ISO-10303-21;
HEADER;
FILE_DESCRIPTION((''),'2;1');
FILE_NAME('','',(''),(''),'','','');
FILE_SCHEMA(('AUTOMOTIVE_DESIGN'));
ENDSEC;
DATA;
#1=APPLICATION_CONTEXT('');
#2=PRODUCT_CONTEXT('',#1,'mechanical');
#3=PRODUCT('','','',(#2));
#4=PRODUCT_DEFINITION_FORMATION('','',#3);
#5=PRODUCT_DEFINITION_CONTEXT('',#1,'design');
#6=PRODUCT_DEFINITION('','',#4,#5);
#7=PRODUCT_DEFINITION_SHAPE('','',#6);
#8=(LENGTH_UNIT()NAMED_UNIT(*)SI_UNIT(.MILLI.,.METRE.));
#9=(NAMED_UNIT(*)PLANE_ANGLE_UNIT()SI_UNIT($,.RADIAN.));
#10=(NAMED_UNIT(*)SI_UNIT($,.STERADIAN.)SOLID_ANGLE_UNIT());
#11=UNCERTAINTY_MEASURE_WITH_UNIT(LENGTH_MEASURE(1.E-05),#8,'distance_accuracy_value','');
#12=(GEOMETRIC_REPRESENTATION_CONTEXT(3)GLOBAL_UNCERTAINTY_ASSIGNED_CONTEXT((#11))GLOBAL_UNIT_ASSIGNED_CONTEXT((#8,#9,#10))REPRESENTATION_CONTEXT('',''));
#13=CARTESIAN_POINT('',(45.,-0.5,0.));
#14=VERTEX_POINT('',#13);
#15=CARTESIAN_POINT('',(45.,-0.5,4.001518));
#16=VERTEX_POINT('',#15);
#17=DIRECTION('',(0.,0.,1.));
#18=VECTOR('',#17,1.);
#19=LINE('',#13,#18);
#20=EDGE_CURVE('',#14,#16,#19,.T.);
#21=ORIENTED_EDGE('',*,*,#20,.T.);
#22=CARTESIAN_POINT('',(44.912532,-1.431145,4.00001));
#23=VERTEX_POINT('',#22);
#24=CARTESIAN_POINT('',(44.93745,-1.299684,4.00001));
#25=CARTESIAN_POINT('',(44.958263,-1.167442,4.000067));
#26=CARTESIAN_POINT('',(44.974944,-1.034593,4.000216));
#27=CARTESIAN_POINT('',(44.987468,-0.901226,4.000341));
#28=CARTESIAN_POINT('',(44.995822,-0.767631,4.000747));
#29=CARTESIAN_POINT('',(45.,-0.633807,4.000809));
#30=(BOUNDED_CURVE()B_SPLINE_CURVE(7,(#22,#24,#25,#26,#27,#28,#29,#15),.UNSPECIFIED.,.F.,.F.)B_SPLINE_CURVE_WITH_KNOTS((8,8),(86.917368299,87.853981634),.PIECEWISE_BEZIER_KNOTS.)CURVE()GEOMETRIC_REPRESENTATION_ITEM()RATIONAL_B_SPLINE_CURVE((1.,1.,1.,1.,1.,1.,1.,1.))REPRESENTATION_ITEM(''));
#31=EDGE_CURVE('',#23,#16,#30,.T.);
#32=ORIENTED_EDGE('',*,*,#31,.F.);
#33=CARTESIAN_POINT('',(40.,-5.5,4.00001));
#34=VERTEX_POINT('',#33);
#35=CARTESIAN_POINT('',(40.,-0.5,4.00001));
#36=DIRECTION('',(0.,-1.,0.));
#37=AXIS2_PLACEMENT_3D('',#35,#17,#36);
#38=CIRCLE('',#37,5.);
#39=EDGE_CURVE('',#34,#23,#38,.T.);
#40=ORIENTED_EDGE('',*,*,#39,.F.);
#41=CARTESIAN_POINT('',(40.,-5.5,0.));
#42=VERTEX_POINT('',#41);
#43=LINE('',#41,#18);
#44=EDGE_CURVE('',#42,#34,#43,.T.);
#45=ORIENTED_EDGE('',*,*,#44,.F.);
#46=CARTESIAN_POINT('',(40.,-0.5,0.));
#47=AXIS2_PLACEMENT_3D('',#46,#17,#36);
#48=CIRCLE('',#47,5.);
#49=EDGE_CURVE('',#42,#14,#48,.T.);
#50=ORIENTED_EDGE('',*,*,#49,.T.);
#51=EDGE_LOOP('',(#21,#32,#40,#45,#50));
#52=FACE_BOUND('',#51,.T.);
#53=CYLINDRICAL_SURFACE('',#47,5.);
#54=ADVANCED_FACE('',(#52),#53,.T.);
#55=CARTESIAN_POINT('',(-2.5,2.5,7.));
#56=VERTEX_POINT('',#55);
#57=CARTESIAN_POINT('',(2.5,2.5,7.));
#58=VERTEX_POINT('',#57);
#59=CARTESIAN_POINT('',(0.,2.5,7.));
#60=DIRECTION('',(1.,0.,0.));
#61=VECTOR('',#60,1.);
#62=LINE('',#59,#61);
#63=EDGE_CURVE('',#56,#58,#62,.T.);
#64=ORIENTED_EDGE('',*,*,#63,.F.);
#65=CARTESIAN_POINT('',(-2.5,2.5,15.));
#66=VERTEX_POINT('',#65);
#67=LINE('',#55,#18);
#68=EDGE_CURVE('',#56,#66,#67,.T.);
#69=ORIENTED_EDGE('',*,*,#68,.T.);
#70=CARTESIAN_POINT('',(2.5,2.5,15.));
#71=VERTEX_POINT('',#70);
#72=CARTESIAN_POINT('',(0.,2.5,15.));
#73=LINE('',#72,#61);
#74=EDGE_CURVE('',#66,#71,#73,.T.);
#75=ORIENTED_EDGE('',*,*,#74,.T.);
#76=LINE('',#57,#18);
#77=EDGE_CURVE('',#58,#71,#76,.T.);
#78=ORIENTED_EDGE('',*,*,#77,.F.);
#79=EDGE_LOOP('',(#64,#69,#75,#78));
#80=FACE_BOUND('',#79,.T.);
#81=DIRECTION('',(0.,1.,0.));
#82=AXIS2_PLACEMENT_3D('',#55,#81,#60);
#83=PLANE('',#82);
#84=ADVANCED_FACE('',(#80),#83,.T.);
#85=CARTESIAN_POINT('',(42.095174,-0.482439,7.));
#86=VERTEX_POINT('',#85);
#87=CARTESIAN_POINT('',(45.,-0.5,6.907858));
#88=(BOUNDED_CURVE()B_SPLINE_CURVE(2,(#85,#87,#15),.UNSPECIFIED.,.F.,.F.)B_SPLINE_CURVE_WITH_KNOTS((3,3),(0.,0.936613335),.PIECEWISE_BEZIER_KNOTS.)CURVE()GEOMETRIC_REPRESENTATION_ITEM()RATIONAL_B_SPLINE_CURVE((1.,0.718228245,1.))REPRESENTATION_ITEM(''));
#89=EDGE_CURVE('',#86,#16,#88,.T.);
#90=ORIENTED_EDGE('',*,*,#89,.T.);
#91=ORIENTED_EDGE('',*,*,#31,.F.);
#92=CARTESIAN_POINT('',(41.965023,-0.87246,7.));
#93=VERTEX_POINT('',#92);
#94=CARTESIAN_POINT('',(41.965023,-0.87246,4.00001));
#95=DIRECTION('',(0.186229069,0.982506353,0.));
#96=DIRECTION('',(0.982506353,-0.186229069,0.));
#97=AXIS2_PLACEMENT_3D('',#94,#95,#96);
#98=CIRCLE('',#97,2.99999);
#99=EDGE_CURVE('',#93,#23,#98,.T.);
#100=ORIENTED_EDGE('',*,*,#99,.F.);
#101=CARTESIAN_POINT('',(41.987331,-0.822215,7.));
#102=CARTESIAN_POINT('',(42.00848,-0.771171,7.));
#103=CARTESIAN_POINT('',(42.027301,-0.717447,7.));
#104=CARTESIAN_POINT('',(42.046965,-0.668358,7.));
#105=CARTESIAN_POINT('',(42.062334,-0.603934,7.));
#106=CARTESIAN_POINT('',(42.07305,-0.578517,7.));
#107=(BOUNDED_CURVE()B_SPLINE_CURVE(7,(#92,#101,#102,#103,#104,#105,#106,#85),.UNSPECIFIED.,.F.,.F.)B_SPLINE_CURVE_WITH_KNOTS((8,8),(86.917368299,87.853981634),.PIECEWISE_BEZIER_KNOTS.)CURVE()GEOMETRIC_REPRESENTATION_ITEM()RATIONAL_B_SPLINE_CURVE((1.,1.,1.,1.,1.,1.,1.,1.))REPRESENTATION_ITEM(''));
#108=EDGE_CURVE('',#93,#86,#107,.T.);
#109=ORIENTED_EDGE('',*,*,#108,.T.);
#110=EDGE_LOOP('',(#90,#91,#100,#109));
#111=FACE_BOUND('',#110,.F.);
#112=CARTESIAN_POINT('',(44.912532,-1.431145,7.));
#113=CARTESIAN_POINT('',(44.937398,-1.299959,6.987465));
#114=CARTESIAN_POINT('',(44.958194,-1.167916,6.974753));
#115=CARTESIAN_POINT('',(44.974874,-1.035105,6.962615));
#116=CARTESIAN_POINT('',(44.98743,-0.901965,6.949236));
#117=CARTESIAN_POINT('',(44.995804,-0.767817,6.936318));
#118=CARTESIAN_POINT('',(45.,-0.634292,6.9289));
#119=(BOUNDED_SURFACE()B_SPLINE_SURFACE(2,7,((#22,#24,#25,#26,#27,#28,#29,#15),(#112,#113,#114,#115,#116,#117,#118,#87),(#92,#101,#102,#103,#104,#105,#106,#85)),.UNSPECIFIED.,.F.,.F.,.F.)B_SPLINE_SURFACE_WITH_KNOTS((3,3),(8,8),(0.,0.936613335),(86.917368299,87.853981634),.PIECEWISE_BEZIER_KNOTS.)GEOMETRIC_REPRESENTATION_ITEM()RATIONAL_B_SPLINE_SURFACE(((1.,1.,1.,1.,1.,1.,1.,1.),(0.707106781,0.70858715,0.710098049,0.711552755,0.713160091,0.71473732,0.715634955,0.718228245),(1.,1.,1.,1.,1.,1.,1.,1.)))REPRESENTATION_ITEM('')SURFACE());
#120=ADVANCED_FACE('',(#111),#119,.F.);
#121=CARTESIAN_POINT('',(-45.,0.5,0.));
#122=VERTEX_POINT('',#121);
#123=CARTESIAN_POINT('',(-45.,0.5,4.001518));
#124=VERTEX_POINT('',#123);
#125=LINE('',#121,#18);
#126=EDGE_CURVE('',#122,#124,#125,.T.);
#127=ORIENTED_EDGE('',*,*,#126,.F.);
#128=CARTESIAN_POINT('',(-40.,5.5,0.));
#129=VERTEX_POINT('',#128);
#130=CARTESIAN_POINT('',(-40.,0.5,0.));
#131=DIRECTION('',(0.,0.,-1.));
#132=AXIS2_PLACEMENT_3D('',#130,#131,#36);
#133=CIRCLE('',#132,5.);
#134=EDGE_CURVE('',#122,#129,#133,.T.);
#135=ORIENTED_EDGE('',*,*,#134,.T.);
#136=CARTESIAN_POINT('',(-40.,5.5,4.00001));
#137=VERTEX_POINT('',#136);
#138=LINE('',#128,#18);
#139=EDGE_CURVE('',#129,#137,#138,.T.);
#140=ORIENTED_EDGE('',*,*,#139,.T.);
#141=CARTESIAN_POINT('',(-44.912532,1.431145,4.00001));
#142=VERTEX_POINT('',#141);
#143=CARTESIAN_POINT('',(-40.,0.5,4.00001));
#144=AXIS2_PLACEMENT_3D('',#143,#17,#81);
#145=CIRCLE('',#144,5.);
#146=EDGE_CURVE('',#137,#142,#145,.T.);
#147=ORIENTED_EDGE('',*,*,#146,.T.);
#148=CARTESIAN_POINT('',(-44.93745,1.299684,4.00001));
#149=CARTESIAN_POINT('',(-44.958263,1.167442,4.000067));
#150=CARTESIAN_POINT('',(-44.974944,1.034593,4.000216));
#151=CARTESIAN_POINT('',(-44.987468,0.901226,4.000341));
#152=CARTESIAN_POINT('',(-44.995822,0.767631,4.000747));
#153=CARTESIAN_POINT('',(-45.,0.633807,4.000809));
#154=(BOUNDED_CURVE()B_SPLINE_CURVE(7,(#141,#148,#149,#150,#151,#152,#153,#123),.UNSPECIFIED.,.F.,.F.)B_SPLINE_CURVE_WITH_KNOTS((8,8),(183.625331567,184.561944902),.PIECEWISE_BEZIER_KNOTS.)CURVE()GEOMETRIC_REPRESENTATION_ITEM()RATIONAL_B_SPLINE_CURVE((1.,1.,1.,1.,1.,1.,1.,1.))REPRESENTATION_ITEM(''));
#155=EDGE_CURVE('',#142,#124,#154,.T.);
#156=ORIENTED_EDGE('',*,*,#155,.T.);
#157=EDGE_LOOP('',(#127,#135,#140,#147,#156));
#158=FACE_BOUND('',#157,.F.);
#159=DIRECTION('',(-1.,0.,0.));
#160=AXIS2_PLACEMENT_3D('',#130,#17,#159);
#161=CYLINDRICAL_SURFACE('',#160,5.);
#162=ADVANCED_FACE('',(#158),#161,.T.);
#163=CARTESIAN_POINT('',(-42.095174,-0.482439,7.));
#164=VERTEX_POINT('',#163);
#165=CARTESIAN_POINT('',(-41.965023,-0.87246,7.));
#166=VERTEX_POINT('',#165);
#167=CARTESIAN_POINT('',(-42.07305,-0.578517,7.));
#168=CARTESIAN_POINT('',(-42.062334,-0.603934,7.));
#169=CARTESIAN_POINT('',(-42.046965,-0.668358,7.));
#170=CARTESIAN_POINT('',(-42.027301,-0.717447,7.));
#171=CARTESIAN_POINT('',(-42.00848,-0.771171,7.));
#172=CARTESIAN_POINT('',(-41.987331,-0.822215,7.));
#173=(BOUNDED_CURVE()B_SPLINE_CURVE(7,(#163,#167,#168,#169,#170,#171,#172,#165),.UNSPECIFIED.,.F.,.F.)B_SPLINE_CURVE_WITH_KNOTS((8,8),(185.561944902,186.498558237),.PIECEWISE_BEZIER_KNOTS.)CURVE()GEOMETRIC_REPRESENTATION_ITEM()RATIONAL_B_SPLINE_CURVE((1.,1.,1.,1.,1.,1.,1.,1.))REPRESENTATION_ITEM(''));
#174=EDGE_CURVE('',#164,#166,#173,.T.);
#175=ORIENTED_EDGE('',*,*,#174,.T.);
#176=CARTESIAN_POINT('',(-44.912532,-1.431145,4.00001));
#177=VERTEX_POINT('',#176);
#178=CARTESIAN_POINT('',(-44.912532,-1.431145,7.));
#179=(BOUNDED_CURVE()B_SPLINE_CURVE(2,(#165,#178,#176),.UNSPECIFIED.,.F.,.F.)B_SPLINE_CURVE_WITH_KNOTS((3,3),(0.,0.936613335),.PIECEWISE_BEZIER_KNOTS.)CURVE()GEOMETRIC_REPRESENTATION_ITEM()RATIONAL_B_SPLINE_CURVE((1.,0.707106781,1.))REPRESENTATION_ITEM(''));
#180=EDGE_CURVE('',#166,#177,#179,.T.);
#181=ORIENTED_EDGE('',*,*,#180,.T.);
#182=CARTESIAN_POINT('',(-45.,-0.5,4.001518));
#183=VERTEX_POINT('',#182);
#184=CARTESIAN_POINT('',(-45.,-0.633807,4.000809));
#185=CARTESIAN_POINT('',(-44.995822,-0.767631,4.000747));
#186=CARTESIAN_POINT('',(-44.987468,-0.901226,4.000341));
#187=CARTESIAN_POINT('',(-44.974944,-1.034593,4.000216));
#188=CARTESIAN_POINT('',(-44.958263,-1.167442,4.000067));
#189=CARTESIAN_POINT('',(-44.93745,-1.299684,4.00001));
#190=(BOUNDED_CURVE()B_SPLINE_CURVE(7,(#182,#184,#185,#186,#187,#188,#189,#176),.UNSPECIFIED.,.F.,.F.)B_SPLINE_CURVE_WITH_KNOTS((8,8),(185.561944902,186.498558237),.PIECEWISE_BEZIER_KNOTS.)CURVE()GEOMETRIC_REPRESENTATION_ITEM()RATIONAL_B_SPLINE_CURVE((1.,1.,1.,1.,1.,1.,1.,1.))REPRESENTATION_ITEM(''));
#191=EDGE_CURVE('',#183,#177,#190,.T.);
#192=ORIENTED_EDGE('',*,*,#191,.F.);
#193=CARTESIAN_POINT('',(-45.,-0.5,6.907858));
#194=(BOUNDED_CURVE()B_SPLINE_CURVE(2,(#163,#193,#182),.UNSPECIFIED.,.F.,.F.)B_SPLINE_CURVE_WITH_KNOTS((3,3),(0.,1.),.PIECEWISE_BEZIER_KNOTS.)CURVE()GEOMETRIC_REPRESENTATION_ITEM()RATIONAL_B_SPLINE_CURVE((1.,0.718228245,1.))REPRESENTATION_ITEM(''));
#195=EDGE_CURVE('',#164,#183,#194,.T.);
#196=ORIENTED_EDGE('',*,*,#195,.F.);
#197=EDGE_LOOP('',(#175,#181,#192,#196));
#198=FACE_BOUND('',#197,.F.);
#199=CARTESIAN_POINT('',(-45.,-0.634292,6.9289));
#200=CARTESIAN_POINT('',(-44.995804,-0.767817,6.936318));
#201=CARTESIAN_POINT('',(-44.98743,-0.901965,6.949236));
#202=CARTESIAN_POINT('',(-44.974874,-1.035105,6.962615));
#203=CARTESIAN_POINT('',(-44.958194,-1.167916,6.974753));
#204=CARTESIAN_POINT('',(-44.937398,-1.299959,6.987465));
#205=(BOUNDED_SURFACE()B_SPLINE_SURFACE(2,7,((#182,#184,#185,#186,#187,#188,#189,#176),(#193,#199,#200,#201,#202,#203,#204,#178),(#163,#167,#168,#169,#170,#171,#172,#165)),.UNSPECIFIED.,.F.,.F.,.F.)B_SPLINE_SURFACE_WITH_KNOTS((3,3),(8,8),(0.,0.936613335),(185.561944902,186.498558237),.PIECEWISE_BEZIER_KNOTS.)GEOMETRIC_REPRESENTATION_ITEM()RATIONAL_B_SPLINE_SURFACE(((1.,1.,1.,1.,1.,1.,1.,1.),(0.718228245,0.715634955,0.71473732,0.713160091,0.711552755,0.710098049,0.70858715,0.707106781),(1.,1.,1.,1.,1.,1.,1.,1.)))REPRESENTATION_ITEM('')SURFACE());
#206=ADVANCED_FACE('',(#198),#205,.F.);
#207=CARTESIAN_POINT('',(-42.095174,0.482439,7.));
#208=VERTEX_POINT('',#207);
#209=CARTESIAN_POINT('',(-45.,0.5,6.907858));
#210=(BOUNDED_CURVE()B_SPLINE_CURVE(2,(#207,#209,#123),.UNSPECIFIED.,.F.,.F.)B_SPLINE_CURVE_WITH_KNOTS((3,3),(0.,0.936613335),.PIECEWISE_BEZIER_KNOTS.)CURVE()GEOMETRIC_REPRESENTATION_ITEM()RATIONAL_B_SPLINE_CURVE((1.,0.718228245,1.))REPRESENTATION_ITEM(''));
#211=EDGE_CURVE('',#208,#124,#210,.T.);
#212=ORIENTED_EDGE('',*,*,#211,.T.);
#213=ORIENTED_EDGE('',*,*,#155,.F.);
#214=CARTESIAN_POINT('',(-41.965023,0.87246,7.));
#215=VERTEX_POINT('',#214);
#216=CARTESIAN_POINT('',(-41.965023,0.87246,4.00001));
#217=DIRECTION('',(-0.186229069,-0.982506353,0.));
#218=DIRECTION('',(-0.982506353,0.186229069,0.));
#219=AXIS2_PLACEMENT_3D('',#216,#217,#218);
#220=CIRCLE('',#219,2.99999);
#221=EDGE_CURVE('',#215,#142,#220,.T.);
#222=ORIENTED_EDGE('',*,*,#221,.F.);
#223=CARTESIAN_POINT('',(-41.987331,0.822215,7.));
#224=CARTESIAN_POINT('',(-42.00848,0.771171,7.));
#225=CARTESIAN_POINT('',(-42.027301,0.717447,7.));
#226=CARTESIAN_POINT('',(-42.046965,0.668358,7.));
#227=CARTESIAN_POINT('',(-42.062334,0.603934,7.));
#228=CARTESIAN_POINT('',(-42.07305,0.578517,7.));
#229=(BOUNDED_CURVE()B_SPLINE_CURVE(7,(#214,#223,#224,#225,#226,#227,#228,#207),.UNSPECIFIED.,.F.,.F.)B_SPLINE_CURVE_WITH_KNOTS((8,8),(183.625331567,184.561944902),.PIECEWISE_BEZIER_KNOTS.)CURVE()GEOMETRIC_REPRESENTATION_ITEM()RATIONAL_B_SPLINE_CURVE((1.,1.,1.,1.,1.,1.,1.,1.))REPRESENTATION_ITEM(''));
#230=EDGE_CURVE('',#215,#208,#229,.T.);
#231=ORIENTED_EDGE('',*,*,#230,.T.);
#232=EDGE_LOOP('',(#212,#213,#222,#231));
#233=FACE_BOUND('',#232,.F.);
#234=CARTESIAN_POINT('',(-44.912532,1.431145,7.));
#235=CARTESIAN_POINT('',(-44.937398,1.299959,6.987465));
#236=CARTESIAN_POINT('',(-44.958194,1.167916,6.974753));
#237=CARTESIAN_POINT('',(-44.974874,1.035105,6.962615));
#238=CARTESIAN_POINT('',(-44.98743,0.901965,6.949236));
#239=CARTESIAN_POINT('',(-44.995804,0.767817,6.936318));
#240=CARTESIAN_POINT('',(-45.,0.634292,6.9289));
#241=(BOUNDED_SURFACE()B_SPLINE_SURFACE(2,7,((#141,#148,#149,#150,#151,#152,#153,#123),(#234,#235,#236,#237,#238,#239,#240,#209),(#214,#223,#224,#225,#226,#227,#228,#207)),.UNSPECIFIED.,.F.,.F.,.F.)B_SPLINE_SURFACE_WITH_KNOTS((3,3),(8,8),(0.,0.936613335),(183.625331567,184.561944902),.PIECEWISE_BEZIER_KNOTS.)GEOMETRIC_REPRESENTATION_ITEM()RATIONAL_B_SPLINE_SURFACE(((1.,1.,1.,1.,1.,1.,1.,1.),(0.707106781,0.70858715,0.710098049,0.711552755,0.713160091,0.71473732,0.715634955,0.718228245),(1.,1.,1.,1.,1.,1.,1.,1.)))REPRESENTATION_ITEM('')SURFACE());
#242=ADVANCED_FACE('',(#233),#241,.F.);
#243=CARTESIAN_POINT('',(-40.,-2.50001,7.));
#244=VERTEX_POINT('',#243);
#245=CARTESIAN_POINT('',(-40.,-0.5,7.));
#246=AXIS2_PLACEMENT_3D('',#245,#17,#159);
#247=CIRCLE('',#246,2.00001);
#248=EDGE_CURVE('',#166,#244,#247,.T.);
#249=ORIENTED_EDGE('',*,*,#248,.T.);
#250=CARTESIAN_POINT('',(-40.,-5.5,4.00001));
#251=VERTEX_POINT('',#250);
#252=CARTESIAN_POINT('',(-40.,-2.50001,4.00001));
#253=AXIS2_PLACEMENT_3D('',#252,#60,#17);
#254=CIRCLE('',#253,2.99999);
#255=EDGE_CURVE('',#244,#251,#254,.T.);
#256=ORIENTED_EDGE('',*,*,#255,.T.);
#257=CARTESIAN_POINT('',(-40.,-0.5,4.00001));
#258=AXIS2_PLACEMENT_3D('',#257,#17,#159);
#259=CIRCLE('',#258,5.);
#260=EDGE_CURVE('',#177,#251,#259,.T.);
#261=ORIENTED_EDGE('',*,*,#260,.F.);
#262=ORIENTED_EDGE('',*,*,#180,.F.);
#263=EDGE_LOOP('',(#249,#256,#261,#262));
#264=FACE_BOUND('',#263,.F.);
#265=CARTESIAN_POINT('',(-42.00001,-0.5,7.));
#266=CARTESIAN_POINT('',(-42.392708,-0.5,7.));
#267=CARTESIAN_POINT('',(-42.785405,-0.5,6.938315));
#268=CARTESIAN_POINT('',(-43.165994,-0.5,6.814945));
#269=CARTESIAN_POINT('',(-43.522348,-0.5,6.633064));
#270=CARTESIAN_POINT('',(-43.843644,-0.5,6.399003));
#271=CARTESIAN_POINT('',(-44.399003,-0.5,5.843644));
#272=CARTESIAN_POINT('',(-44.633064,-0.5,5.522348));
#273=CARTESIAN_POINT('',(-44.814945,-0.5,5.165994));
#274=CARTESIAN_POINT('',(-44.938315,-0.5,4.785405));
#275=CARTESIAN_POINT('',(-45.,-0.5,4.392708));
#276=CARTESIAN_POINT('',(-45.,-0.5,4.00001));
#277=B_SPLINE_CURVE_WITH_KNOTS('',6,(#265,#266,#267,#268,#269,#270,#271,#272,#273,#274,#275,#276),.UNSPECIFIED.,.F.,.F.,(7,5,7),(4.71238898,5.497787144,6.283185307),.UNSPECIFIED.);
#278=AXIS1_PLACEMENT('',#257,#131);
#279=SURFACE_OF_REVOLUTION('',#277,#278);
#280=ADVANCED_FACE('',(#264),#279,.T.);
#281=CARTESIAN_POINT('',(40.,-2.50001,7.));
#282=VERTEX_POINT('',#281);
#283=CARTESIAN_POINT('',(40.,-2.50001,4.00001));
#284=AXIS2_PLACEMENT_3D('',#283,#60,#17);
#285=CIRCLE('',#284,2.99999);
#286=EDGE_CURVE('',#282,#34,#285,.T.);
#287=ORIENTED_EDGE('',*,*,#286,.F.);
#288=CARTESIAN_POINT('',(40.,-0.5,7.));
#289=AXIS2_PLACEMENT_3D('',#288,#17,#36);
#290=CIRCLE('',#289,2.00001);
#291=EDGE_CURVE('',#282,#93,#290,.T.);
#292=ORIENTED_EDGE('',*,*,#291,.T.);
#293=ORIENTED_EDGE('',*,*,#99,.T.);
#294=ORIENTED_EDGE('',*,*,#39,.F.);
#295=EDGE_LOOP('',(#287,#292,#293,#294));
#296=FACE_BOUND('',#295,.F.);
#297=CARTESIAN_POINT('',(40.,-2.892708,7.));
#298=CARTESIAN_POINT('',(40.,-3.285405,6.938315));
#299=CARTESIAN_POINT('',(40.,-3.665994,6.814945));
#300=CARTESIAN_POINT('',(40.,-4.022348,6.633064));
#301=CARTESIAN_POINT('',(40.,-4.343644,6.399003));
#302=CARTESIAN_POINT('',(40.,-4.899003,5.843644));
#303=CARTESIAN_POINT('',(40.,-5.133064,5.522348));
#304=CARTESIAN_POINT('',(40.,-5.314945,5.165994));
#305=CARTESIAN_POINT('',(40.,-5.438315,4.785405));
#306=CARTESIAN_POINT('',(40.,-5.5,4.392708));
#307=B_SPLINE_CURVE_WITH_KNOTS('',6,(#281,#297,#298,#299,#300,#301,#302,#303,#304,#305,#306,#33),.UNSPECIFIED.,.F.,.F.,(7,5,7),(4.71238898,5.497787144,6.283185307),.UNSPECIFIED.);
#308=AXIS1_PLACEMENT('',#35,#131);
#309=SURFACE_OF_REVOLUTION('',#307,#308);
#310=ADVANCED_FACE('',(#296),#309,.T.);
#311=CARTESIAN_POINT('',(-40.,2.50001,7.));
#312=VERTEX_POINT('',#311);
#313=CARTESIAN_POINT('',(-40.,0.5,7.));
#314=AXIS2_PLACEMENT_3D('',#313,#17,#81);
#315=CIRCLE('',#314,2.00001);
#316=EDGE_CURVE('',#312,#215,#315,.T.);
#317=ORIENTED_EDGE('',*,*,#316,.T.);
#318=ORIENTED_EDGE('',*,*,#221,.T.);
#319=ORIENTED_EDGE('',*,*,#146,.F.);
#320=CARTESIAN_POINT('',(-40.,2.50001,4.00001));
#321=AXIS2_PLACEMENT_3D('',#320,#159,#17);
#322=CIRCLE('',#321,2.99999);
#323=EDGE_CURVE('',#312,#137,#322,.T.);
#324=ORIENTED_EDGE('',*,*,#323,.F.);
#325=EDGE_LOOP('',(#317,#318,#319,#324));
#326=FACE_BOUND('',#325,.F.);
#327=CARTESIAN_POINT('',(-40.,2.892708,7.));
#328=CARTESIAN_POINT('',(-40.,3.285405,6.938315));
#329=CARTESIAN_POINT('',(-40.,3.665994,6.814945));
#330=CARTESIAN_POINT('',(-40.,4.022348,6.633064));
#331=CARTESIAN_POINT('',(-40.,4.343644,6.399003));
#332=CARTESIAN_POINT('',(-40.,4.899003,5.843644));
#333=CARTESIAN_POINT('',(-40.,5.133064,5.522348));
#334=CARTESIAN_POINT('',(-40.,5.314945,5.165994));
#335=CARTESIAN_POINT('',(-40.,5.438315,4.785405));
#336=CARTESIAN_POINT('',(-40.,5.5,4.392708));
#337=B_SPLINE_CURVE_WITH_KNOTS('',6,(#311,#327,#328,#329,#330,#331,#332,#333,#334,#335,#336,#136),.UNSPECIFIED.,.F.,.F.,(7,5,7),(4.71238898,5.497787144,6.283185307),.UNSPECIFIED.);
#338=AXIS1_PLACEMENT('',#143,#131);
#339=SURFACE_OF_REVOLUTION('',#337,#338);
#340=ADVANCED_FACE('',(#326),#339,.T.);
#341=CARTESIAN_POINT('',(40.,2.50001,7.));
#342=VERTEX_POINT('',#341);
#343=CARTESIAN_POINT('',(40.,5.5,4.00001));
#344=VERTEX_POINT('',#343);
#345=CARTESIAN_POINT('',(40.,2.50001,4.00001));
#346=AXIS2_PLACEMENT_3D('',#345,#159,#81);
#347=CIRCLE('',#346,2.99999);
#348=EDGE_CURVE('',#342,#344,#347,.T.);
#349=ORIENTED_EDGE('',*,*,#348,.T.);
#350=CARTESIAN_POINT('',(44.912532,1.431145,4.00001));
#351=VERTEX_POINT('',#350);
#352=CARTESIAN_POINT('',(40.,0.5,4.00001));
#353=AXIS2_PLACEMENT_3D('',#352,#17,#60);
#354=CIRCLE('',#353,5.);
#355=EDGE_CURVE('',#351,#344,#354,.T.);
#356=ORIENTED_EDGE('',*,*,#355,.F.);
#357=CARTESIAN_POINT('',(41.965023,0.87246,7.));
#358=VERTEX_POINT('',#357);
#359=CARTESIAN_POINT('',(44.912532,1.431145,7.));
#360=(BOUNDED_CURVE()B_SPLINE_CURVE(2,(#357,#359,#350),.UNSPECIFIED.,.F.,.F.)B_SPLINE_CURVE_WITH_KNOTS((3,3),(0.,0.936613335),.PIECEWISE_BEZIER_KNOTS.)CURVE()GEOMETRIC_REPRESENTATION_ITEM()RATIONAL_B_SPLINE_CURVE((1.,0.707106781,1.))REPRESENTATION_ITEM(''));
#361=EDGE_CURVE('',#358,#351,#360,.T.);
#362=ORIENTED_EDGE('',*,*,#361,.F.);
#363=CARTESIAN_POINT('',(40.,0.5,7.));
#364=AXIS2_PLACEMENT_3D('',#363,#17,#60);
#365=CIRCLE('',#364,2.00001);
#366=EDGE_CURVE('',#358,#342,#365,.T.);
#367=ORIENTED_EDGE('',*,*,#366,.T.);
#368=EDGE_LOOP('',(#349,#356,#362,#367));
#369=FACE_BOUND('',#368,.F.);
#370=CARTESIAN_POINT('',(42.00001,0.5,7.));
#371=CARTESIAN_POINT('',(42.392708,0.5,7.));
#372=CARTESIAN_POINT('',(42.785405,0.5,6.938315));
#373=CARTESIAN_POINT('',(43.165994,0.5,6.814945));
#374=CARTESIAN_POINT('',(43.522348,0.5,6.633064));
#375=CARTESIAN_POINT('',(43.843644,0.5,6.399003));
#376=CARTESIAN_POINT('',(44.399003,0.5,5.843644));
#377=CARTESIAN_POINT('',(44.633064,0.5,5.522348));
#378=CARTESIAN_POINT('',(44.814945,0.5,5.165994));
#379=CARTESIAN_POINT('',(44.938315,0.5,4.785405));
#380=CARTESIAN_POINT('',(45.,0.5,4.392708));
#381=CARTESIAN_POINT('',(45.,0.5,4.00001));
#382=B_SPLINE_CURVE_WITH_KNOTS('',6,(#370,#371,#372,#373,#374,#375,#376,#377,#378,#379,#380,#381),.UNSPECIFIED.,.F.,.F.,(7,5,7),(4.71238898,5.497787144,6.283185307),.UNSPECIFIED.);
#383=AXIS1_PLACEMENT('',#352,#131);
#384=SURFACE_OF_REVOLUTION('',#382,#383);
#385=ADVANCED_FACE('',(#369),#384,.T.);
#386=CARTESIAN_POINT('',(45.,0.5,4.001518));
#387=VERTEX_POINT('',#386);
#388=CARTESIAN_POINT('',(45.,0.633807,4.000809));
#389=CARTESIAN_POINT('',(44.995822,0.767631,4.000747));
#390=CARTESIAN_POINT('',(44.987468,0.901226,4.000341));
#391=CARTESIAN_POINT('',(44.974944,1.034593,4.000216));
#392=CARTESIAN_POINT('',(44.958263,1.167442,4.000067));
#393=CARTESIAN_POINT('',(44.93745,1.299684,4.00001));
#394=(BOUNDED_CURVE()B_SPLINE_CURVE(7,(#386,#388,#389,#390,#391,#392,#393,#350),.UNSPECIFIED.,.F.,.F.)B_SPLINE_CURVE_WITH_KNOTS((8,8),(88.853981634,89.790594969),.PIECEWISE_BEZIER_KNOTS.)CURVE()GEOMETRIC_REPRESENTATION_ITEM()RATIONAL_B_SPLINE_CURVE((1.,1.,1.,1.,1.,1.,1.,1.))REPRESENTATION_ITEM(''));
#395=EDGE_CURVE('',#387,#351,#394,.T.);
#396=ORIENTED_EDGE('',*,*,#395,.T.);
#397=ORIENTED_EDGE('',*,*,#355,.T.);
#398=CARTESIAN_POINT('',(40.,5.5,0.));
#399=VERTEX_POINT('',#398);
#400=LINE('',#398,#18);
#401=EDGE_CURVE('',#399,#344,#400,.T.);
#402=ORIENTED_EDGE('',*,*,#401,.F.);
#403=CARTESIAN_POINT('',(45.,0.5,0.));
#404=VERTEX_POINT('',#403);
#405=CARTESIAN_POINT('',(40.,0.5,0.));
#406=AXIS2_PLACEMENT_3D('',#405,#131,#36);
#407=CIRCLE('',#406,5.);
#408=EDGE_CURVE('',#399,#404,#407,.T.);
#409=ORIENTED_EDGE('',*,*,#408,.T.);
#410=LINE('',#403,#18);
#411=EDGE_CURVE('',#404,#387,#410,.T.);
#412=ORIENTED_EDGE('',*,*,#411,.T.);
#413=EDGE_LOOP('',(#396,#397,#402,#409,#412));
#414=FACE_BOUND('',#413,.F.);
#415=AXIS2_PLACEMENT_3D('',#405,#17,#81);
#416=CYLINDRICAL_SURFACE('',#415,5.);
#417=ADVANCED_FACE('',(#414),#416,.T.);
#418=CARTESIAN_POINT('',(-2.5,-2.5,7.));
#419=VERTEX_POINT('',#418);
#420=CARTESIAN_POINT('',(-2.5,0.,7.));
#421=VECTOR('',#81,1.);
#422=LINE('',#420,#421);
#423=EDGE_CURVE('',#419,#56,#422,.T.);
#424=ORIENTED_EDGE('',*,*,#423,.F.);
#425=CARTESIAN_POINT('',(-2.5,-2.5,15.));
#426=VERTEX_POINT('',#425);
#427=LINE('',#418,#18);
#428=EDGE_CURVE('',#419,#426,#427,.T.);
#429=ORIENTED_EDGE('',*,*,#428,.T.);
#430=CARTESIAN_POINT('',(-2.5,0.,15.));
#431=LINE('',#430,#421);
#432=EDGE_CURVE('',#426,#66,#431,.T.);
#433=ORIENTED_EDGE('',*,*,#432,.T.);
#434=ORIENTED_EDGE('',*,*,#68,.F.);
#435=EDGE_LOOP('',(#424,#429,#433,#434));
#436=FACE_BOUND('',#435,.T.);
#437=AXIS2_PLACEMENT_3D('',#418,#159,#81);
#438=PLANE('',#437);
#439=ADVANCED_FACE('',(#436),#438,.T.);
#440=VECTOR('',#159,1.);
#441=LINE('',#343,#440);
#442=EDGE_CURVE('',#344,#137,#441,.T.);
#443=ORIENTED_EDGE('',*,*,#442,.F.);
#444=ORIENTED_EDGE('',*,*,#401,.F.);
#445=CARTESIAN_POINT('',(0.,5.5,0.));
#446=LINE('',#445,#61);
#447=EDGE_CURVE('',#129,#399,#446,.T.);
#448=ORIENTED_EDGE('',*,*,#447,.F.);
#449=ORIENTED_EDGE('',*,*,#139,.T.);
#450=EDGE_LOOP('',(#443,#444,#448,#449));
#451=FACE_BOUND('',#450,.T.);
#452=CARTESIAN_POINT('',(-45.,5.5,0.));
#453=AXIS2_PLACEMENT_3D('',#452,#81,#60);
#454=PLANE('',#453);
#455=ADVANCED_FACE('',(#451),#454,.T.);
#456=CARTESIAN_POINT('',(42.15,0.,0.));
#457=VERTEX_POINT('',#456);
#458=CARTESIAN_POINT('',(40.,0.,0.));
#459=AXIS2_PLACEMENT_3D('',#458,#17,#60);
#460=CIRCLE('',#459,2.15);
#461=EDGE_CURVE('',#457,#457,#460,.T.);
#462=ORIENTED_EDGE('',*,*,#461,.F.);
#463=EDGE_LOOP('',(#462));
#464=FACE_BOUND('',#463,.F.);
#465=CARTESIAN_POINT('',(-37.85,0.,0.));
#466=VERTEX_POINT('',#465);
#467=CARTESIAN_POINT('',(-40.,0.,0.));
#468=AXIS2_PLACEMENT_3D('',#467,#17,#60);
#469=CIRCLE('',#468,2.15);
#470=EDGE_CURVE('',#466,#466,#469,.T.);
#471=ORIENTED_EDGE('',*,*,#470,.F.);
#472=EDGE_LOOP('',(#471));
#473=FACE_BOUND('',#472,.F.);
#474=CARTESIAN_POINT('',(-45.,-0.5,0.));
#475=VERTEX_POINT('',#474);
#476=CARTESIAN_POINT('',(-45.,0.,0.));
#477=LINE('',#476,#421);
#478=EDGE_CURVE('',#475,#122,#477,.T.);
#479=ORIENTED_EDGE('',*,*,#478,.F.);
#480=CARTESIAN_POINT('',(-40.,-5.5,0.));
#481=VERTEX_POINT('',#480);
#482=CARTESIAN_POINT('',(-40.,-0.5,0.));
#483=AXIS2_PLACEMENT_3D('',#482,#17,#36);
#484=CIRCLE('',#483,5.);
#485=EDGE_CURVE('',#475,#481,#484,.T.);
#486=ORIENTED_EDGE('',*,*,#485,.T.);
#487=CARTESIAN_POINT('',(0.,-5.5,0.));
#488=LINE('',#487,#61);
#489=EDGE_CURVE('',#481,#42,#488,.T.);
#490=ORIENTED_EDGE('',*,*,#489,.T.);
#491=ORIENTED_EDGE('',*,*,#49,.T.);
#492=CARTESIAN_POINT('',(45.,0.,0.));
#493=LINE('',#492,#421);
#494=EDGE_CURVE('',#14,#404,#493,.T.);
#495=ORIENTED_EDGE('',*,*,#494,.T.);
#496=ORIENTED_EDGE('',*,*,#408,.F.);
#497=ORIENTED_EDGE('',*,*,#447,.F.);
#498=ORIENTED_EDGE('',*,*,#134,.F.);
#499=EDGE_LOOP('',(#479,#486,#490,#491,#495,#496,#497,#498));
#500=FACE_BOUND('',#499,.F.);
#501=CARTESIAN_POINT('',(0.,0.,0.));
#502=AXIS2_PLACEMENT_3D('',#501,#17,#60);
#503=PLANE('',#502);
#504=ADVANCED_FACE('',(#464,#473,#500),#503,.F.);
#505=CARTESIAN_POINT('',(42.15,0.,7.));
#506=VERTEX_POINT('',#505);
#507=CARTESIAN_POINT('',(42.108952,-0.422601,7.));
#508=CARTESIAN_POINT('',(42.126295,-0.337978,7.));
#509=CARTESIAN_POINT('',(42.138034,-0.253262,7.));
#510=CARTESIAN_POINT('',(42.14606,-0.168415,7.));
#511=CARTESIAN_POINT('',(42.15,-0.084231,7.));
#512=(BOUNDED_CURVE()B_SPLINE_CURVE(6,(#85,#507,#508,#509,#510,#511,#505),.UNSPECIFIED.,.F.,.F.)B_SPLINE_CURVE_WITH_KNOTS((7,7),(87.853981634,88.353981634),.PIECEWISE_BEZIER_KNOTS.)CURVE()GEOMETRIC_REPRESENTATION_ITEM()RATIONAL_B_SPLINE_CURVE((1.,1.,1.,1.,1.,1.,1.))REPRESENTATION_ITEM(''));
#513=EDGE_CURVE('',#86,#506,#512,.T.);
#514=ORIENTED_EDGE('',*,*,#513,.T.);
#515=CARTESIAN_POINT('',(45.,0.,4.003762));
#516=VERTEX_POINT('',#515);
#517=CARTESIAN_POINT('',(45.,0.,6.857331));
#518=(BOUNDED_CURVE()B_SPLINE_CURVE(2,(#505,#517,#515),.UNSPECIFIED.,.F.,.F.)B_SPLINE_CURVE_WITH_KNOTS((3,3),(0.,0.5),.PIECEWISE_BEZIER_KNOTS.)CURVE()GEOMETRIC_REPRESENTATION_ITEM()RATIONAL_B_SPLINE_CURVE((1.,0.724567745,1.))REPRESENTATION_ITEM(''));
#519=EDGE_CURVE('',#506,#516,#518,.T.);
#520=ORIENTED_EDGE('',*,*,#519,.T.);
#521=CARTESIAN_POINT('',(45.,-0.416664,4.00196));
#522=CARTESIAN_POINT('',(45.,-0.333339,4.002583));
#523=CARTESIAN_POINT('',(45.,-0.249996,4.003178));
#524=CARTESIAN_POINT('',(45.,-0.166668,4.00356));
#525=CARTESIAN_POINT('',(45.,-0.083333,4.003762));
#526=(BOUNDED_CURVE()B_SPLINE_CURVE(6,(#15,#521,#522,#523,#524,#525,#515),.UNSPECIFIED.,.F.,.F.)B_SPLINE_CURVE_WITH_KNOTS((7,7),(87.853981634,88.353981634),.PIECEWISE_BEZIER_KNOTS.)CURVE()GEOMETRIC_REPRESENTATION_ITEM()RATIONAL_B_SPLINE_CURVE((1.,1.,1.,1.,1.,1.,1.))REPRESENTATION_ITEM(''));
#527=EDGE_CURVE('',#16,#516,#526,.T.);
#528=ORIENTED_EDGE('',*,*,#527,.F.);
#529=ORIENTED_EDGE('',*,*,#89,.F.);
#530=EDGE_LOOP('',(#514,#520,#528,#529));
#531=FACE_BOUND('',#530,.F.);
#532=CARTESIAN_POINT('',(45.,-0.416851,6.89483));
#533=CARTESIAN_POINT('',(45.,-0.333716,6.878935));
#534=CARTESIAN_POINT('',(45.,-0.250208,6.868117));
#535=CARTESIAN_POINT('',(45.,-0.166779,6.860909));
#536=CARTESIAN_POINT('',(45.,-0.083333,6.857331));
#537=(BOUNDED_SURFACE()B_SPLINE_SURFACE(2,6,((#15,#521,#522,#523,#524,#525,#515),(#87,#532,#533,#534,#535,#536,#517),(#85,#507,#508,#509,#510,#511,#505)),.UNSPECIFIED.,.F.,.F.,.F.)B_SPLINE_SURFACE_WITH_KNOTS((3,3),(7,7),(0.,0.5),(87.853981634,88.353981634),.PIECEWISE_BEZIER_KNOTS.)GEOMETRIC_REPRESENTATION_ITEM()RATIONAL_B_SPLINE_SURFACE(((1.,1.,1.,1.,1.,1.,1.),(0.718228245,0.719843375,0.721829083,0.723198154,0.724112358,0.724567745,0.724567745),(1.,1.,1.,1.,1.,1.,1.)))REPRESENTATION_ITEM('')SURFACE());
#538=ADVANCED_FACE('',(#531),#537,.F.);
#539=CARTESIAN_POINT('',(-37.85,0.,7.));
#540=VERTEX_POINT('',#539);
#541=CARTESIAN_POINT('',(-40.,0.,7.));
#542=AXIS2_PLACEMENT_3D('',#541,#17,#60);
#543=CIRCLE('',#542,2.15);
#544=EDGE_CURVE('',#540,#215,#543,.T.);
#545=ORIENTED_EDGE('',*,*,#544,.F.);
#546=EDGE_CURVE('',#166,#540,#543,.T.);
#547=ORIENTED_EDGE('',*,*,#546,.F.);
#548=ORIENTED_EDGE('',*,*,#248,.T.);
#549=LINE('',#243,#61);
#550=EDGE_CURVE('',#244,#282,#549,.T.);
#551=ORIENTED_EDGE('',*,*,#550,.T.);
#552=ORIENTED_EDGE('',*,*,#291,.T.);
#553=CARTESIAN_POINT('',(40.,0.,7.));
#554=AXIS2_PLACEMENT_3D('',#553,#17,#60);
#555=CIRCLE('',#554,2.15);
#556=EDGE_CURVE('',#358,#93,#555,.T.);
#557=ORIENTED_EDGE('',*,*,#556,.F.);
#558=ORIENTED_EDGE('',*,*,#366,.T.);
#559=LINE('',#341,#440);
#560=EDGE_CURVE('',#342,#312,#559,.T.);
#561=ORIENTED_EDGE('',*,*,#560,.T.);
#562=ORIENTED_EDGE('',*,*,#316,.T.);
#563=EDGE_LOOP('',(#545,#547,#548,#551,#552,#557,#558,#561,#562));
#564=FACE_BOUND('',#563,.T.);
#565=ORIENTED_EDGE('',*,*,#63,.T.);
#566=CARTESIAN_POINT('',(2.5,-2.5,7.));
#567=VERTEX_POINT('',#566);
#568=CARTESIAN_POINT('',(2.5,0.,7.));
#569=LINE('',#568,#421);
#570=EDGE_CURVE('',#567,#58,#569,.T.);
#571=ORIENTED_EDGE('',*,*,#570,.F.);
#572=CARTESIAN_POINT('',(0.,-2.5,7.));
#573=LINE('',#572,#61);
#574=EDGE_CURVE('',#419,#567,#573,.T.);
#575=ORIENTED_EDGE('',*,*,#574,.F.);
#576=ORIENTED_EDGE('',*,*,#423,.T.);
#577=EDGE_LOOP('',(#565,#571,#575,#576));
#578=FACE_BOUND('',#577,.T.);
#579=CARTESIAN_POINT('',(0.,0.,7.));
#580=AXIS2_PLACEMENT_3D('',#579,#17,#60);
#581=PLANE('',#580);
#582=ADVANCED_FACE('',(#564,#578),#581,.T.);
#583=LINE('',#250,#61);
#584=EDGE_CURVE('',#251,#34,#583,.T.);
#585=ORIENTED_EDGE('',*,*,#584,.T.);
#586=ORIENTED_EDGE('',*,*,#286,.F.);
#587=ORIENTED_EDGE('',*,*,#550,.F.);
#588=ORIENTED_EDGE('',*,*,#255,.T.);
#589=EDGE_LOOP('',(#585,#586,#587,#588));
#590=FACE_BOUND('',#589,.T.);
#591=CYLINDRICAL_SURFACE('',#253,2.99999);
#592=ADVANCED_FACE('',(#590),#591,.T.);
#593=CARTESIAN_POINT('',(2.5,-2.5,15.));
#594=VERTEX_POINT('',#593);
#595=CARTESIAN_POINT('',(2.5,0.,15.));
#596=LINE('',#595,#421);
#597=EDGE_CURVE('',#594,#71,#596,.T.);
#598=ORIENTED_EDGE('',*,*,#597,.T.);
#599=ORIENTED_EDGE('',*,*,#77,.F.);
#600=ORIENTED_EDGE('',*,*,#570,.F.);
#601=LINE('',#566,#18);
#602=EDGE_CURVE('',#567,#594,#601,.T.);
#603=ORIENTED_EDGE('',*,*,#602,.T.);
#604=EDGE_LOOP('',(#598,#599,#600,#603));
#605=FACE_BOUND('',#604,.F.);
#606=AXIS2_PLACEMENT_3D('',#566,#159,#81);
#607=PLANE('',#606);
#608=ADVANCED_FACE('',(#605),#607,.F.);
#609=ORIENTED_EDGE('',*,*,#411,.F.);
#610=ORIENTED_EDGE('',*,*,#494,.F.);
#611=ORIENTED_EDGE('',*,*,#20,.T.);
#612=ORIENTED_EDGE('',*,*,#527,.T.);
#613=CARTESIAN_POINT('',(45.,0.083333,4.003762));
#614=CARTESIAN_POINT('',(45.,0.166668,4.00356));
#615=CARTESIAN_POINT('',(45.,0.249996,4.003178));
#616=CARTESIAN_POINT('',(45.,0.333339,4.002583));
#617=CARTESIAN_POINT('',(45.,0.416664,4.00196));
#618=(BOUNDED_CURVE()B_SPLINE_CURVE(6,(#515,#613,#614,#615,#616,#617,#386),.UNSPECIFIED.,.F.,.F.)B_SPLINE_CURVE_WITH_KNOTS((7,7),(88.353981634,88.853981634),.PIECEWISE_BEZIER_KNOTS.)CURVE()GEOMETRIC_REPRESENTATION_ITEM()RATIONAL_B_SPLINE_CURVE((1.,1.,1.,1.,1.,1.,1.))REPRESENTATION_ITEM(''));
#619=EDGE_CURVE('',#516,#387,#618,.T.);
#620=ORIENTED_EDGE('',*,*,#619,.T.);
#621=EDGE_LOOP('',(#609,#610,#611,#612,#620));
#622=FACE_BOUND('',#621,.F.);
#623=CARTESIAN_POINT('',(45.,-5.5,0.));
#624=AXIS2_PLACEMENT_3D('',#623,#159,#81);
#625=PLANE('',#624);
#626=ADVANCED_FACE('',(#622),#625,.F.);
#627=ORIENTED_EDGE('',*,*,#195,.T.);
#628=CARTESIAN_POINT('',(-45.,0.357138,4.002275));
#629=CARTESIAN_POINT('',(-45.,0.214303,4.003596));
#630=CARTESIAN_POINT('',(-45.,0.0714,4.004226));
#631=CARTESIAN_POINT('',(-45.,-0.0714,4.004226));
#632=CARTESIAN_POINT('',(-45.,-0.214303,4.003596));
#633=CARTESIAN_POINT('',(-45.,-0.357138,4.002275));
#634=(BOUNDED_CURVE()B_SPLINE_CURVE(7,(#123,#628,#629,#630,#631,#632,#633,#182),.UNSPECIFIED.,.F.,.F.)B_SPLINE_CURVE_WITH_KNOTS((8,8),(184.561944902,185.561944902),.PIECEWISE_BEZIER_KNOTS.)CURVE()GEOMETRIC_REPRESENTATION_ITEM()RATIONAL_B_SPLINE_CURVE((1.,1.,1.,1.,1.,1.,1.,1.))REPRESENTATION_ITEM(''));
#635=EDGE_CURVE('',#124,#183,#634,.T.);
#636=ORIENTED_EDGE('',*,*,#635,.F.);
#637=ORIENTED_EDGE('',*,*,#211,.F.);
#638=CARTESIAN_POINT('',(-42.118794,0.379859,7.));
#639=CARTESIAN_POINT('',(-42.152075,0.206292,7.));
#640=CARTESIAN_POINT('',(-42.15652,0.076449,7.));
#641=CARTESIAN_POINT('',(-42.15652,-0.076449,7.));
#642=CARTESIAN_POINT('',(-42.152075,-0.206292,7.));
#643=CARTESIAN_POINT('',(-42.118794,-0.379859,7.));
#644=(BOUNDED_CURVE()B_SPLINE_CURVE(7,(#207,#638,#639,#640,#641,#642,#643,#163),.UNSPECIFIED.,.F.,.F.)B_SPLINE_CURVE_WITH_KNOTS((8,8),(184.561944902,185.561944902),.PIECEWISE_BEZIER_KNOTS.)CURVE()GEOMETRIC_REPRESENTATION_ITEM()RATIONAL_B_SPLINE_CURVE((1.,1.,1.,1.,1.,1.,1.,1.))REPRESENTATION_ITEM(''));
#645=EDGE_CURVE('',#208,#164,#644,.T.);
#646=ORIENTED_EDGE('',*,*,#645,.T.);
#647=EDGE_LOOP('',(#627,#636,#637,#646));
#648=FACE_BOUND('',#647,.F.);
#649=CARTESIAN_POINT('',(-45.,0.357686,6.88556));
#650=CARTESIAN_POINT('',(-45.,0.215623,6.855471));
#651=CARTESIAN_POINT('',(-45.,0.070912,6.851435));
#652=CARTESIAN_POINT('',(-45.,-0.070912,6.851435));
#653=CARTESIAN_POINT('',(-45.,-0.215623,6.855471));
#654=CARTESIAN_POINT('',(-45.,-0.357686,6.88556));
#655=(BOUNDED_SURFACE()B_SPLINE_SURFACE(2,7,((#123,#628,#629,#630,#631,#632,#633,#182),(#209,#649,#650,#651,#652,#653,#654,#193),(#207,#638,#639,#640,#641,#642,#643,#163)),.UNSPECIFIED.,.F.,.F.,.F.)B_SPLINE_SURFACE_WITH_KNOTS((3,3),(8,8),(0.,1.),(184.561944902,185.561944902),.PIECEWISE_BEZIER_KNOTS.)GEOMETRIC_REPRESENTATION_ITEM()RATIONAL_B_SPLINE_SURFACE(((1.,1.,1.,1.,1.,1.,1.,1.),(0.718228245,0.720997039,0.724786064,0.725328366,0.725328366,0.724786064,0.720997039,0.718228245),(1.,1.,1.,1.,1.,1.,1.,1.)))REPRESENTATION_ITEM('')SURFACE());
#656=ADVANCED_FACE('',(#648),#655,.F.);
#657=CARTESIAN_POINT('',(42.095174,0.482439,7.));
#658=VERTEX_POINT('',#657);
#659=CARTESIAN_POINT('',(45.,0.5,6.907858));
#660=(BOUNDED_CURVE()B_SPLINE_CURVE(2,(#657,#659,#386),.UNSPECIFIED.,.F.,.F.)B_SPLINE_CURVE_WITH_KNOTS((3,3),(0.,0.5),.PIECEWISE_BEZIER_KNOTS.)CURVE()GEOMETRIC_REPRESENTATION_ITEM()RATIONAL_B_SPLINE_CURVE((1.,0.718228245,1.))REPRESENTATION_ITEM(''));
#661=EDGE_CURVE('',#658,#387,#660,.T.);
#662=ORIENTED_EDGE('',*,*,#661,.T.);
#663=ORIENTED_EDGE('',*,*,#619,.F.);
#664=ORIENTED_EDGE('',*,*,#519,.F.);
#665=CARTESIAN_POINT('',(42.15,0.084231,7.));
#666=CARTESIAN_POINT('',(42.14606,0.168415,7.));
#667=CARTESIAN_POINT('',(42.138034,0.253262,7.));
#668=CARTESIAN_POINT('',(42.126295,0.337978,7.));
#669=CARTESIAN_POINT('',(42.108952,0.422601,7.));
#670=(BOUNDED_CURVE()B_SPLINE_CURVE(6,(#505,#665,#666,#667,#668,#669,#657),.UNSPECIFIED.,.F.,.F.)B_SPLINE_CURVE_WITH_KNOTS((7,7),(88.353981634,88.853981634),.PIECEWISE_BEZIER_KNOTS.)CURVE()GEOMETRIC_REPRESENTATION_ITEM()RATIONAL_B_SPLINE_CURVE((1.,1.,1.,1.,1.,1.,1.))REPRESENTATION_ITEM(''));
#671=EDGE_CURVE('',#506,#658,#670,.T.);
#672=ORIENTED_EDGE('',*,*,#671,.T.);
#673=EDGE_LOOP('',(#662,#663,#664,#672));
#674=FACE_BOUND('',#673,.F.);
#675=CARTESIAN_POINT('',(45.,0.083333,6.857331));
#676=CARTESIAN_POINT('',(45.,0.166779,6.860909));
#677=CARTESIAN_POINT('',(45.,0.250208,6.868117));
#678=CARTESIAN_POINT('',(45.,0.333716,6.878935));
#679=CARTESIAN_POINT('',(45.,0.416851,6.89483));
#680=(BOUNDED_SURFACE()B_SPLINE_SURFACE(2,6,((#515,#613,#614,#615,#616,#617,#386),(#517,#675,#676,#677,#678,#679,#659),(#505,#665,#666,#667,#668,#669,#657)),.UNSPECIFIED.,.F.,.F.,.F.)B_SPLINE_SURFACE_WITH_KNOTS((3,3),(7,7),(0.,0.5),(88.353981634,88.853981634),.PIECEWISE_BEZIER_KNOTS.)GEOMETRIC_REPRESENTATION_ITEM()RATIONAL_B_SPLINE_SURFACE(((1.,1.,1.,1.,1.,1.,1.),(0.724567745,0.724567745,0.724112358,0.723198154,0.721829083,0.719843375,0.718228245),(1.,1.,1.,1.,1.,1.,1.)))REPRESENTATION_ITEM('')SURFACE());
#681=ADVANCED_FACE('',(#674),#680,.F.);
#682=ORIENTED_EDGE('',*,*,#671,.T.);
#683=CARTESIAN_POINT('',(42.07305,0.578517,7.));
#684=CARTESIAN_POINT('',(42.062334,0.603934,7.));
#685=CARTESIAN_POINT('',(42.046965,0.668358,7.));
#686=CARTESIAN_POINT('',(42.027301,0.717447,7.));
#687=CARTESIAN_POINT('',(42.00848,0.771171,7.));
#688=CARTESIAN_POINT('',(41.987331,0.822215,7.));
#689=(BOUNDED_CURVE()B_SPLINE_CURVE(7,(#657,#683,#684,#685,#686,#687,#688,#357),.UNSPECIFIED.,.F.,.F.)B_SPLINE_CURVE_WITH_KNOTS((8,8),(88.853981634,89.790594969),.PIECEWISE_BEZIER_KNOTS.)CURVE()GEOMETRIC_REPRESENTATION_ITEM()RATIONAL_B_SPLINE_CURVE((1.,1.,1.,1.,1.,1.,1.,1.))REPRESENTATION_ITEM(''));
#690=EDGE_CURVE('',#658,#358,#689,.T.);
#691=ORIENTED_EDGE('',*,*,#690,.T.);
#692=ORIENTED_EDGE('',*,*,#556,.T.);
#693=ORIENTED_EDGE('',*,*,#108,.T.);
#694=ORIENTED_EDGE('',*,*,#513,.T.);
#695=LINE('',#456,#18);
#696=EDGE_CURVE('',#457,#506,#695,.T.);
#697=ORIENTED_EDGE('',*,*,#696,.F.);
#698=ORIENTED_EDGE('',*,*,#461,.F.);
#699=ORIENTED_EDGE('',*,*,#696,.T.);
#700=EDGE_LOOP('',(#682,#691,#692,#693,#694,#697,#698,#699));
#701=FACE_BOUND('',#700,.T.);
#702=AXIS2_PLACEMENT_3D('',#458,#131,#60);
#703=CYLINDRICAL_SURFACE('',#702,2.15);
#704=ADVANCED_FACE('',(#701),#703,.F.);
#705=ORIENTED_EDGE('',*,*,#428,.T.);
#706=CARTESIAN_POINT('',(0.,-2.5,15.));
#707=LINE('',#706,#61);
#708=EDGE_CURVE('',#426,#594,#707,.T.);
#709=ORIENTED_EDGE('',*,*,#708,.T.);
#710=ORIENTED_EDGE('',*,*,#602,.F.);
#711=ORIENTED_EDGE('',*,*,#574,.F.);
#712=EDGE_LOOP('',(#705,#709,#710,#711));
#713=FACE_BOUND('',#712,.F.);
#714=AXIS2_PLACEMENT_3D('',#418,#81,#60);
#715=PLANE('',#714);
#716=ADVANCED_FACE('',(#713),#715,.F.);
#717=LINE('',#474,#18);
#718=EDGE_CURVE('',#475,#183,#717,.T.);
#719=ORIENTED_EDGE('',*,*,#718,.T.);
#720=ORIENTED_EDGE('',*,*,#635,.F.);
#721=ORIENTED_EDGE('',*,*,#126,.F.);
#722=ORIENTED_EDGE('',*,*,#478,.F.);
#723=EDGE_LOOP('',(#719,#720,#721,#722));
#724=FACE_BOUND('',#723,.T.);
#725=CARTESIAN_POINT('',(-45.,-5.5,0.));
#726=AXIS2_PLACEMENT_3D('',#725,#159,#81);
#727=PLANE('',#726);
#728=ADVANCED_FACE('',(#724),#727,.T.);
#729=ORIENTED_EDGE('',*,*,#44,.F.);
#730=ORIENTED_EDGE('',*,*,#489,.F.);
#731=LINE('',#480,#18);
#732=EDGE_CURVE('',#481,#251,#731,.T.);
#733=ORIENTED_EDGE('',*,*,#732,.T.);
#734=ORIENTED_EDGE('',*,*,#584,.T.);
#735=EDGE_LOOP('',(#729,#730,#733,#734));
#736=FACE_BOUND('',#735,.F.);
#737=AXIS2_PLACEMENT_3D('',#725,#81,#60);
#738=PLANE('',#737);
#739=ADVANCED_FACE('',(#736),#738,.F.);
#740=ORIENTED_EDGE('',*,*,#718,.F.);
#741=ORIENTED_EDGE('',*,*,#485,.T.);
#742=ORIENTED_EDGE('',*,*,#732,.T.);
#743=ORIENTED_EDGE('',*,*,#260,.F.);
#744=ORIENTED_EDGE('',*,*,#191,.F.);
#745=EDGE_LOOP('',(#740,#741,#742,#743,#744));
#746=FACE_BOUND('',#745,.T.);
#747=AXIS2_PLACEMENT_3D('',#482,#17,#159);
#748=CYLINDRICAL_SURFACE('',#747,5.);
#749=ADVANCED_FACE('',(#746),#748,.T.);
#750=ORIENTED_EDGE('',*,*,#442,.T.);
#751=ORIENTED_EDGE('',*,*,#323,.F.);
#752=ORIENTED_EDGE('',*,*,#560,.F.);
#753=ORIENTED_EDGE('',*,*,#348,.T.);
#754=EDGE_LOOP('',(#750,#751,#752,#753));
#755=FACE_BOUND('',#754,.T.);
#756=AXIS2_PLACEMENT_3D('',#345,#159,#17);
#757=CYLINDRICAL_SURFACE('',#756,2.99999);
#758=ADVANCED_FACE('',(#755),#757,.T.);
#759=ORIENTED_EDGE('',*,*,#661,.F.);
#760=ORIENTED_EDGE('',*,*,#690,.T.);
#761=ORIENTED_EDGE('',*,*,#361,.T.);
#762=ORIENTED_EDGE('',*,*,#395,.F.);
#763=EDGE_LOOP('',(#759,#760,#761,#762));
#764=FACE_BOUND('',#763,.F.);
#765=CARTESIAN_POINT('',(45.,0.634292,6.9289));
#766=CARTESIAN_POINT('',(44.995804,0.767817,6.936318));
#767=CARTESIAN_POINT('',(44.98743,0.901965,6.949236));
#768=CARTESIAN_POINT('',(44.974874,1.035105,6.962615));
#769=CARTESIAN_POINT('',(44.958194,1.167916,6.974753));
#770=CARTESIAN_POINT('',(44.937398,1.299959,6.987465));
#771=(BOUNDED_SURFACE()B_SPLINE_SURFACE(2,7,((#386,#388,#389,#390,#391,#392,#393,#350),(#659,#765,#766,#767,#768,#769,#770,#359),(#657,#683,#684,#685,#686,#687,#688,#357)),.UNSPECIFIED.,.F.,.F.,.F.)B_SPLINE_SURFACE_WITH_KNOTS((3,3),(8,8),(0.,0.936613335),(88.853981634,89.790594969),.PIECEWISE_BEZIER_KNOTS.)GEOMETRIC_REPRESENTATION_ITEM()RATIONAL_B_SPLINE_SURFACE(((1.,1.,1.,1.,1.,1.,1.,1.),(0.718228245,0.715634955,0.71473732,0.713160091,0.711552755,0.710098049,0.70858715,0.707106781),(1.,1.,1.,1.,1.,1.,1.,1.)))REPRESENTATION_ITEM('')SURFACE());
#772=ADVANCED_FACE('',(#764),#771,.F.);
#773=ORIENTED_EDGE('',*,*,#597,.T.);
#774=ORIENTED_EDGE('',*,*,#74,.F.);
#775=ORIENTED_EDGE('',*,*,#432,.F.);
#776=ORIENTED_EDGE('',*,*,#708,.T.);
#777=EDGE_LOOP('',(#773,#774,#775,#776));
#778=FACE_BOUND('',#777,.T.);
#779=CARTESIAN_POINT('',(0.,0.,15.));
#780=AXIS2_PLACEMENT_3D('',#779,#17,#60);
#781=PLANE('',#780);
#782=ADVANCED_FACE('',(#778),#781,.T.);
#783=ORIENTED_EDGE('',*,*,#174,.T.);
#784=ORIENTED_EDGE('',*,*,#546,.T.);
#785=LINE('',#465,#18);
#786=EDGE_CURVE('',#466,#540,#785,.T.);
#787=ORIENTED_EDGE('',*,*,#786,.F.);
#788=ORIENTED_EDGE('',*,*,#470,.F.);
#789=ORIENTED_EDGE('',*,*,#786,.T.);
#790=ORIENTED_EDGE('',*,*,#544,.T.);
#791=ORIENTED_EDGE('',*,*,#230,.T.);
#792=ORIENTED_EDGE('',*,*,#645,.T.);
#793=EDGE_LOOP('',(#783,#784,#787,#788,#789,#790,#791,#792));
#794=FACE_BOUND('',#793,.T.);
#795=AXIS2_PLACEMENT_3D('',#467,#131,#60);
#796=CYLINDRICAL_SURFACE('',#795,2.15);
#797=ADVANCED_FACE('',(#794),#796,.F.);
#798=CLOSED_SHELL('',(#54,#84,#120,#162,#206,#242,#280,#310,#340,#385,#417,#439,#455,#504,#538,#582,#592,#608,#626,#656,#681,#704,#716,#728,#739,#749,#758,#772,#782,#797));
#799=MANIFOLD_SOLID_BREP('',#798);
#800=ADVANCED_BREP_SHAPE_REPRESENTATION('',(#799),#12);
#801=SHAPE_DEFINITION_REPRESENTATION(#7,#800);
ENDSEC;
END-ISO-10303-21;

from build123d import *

# Parameters (mm, degrees)
F0_W     = 90
F0_H     = 11
F0_R     = 2.15
F0_R_2   = 2.25
F1_DEPTH = 7
F2_W     = 5
F2_H     = 5
F3_DEPTH = 8
F4_R     = 5
F5_R     = 2.99999


# Not quite as in the source:
# - a fillet or chamfer is up to 0.001 mm smaller than in the source, because OpenCascade refuses the exact size


with BuildPart() as f1:
    # F0 (on Top) → F1 (new body)
    with BuildSketch(Plane.XY):
        Rectangle(F0_W, F0_H)
        with Locations((-40, 0)):
            Circle(F0_R, mode=Mode.SUBTRACT)
        Circle(F0_R_2, mode=Mode.SUBTRACT)
        with Locations((40, 0)):
            Circle(F0_R, mode=Mode.SUBTRACT)
        Circle(F0_R_2)
    extrude(amount=F1_DEPTH)

    # F2 (on face) → F3 (join)
    with BuildSketch(Plane.XY.offset(7)):
        Rectangle(F2_W, F2_H)
    extrude(amount=F3_DEPTH)

    # F4
    f4_edges = [f1.edges().sort_by_distance(p)[0] for p in [
        (45, -5.5, 3.5),
        (45, 5.5, 3.5),
        (-45, -5.5, 3.5),
        (-45, 5.5, 3.5),
    ]]
    fillet(f4_edges, radius=F4_R)

    # F5 (radius 3 in the source; OpenCascade refuses exactly that, so slightly less here)
    f5_edges = [f1.edges().sort_by_distance(p)[0] for p in [
        (0, -5.5, 7),
    ]]
    fillet(f5_edges, radius=F5_R)


solid = f1.part
